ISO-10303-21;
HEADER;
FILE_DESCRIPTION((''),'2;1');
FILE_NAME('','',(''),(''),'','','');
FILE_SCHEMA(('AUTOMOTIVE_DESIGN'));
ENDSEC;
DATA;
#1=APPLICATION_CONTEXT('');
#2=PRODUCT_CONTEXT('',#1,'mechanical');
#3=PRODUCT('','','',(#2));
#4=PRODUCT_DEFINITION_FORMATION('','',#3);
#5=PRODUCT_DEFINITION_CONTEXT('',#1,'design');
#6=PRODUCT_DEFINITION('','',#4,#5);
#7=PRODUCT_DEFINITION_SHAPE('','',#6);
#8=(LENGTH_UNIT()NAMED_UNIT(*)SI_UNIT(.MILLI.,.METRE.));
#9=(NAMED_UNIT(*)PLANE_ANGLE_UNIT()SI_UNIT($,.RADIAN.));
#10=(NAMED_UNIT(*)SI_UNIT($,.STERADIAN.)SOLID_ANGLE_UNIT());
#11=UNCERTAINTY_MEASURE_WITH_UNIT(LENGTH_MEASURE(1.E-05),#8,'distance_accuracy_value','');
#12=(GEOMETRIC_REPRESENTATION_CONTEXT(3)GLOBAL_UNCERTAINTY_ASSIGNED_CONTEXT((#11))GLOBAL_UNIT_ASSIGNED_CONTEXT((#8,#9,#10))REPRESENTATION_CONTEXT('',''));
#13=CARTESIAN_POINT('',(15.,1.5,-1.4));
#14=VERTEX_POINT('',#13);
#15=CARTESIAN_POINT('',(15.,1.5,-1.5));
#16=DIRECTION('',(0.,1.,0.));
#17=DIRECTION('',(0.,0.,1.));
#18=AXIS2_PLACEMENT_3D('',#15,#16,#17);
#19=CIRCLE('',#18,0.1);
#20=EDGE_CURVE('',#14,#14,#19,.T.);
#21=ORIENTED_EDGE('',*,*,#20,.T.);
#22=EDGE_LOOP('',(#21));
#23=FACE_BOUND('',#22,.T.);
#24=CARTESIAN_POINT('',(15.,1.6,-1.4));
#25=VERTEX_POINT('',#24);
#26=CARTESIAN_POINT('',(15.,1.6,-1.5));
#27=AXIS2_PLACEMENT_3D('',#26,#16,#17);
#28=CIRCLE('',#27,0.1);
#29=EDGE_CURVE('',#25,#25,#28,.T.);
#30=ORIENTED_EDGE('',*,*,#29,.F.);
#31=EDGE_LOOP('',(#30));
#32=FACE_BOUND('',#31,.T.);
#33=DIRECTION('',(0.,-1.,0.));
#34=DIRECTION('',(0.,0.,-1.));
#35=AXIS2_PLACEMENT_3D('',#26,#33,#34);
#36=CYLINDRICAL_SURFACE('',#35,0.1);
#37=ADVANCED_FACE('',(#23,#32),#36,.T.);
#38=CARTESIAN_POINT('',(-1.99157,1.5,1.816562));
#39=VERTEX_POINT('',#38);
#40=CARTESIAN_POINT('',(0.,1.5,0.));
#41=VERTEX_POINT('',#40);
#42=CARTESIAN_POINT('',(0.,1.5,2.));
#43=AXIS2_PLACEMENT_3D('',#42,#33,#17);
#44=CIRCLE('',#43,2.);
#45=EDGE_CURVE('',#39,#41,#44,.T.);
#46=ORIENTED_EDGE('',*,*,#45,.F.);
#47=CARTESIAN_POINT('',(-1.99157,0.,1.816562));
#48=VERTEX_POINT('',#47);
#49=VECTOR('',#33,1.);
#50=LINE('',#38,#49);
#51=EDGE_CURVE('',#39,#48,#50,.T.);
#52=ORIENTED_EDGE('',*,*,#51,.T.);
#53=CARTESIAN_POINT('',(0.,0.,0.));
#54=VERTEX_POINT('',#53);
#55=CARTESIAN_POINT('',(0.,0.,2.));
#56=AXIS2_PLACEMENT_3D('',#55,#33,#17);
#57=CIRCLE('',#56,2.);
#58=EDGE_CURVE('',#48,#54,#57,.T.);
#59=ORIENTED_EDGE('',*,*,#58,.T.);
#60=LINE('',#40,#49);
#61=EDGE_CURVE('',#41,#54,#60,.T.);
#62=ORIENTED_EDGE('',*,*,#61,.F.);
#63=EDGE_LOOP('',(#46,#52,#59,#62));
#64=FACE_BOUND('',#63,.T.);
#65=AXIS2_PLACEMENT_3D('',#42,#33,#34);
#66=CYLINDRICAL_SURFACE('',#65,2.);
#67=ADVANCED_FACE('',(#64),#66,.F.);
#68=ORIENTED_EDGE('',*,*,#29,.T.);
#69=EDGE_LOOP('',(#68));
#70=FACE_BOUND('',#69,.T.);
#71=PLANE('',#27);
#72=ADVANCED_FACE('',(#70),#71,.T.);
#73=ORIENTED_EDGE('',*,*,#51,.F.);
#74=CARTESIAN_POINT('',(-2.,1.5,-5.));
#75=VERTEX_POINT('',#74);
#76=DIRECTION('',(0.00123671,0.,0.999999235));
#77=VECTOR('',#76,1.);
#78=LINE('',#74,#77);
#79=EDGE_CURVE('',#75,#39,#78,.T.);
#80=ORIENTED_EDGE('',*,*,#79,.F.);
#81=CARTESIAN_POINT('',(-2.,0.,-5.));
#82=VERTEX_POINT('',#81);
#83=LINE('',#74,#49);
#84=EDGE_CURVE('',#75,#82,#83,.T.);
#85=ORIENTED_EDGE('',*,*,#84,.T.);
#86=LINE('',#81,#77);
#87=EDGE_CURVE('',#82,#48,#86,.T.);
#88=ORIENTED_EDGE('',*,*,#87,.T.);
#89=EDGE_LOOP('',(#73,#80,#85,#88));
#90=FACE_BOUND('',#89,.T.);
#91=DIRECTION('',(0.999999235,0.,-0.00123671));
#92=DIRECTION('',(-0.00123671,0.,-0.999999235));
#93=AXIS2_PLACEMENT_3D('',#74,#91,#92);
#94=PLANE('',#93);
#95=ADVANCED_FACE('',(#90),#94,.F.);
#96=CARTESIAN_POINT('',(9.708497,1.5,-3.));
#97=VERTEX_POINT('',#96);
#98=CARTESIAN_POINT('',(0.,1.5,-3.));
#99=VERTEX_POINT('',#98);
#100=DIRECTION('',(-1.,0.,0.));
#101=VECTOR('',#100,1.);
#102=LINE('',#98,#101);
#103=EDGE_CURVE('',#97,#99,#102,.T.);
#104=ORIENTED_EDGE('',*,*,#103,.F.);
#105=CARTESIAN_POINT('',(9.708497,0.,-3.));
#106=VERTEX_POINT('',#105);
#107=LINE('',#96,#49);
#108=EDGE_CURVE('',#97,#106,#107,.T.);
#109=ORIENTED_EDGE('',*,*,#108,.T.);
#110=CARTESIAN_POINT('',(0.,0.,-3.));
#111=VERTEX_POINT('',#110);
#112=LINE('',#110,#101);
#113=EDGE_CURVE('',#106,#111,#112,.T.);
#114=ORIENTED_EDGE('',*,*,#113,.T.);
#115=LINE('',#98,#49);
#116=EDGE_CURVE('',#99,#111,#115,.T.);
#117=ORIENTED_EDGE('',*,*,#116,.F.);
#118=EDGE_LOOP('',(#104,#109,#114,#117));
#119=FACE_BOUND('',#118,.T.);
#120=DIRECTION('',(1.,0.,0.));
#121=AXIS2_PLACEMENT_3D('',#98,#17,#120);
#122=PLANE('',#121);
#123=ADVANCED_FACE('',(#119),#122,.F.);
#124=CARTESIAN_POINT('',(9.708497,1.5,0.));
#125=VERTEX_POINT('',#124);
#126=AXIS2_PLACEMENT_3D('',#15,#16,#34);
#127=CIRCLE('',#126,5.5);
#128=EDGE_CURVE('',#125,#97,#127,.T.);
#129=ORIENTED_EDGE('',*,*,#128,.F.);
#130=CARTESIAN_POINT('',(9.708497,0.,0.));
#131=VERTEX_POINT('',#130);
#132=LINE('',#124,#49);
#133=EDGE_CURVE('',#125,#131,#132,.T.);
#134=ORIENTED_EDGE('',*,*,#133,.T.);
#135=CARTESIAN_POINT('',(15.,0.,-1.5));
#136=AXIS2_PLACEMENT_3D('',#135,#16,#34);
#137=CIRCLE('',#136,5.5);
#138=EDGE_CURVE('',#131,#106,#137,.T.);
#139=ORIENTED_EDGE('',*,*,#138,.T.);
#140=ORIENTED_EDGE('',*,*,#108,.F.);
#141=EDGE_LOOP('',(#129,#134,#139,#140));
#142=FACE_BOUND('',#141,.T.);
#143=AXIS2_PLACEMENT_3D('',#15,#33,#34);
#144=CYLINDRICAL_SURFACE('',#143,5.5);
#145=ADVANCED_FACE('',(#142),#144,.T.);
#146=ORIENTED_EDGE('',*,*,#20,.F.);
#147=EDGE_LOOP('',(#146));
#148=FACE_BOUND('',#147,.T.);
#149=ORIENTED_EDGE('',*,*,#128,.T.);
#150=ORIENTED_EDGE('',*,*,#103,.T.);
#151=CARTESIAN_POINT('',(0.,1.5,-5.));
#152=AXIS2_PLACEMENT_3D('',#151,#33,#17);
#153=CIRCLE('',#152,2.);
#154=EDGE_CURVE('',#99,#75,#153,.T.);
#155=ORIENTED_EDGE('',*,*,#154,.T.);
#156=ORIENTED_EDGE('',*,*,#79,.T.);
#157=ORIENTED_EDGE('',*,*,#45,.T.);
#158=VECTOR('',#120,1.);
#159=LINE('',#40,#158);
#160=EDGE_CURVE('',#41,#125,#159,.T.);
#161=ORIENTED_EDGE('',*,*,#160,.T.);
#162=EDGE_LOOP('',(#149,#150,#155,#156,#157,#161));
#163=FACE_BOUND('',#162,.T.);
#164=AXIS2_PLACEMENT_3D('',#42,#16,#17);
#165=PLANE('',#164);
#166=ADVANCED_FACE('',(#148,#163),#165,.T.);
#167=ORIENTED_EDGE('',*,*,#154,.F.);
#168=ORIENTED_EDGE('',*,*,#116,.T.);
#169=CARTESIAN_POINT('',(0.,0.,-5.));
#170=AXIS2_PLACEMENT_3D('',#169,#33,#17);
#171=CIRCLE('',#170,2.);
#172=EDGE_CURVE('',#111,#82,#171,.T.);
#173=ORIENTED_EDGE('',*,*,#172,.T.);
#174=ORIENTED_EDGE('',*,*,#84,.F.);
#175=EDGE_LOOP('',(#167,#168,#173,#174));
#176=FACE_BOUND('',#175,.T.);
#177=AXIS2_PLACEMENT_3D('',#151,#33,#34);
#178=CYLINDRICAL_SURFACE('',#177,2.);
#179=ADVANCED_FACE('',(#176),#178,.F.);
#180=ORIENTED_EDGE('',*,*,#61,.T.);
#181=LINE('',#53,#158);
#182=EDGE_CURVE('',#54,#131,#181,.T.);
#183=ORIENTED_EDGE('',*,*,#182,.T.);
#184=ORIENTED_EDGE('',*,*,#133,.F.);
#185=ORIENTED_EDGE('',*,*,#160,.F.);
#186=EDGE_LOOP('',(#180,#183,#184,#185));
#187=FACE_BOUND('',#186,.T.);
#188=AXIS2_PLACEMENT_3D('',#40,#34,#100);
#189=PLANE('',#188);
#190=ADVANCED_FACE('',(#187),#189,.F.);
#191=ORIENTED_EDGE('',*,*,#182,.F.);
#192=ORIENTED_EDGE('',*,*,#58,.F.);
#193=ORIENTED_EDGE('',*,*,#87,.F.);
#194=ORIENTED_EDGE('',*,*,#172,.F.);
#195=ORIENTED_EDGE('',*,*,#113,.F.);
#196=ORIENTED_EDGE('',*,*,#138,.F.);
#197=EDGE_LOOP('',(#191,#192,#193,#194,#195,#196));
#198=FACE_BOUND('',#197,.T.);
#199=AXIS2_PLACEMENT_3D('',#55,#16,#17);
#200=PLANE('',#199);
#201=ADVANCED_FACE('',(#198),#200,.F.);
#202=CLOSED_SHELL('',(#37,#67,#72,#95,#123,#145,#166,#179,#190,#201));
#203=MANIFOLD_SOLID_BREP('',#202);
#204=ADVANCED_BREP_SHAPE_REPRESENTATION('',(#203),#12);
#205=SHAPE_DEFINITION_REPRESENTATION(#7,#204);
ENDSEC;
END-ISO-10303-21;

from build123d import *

# Parameters (mm, degrees)
ESBO_O2_R                = 0.1
RESSALTO_EXTRUS_O2_DEPTH = 0.1


with BuildPart() as part:
    # Ressalto-extrusão1: read off the stored shape, not the designer's step
    # Ressalto-extrusão1: loft between two sections, ruled curve by curve
    ressalto_extrus_o1_from = [
        Edge.make_three_point_arc((-1.991569883, 1.5, 1.816562273), (-1.347799048, 1.5, 0.522353991), (0, 1.5, 0)),
        Edge.make_three_point_arc((9.708497378, 1.5, -3), (15.757210532, 1.5, -6.947626291), (20.5, 1.5, -1.5)),
        Edge.make_three_point_arc((20.5, 1.5, -1.5), (15.757210532, 1.5, 3.947626291), (9.708497378, 1.5, 0)),
        Edge.make_three_point_arc((0, 1.5, -3), (-1.414213562, 1.5, -3.585786438), (-2, 1.5, -5)),
        Edge.make_line((9.708497378, 1.5, 0), (0, 1.5, 0)),
        Edge.make_line((0, 1.5, -3), (9.708497378, 1.5, -3)),
        Edge.make_line((-1.991569883, 1.5, 1.816562273), (-2, 1.5, -5)),
    ]
    ressalto_extrus_o1_to = [
        Edge.make_three_point_arc((-1.991569883, 0, 1.816562273), (-1.347799048, 0, 0.522353991), (0, 0, 0)),
        Edge.make_three_point_arc((9.708497378, 0, -3), (15.757210532, 0, -6.947626291), (20.5, 0, -1.5)),
        Edge.make_three_point_arc((20.5, 0, -1.5), (15.757210532, 0, 3.947626291), (9.708497378, 0, 0)),
        Edge.make_three_point_arc((0, 0, -3), (-1.414213562, 0, -3.585786438), (-2, 0, -5)),
        Edge.make_line((9.708497378, 0, 0), (0, 0, 0)),
        Edge.make_line((0, 0, -3), (9.708497378, 0, -3)),
        Edge.make_line((-1.991569883, 0, 1.816562273), (-2, 0, -5)),
    ]
    ressalto_extrus_o1 = Solid(Shell([*[Face.make_surface_from_curves(ressalto_extrus_o1_from[k], ressalto_extrus_o1_to[k]) for k in range(7)], Face(Wire(ressalto_extrus_o1_from)), Face(Wire(ressalto_extrus_o1_to))]))
    add(ressalto_extrus_o1)

    # Esboço2 → Ressalto-extrusão2 (add)
    with BuildSketch(Plane(origin=(0, 1.5, 0), x_dir=(1, 0, 0), z_dir=(0, 1, 0))):
        with Locations(Location((15, 1.5, 0), (0, 0, 270))):
            Circle(ESBO_O2_R)
    extrude(amount=RESSALTO_EXTRUS_O2_DEPTH)


solid = part.part
